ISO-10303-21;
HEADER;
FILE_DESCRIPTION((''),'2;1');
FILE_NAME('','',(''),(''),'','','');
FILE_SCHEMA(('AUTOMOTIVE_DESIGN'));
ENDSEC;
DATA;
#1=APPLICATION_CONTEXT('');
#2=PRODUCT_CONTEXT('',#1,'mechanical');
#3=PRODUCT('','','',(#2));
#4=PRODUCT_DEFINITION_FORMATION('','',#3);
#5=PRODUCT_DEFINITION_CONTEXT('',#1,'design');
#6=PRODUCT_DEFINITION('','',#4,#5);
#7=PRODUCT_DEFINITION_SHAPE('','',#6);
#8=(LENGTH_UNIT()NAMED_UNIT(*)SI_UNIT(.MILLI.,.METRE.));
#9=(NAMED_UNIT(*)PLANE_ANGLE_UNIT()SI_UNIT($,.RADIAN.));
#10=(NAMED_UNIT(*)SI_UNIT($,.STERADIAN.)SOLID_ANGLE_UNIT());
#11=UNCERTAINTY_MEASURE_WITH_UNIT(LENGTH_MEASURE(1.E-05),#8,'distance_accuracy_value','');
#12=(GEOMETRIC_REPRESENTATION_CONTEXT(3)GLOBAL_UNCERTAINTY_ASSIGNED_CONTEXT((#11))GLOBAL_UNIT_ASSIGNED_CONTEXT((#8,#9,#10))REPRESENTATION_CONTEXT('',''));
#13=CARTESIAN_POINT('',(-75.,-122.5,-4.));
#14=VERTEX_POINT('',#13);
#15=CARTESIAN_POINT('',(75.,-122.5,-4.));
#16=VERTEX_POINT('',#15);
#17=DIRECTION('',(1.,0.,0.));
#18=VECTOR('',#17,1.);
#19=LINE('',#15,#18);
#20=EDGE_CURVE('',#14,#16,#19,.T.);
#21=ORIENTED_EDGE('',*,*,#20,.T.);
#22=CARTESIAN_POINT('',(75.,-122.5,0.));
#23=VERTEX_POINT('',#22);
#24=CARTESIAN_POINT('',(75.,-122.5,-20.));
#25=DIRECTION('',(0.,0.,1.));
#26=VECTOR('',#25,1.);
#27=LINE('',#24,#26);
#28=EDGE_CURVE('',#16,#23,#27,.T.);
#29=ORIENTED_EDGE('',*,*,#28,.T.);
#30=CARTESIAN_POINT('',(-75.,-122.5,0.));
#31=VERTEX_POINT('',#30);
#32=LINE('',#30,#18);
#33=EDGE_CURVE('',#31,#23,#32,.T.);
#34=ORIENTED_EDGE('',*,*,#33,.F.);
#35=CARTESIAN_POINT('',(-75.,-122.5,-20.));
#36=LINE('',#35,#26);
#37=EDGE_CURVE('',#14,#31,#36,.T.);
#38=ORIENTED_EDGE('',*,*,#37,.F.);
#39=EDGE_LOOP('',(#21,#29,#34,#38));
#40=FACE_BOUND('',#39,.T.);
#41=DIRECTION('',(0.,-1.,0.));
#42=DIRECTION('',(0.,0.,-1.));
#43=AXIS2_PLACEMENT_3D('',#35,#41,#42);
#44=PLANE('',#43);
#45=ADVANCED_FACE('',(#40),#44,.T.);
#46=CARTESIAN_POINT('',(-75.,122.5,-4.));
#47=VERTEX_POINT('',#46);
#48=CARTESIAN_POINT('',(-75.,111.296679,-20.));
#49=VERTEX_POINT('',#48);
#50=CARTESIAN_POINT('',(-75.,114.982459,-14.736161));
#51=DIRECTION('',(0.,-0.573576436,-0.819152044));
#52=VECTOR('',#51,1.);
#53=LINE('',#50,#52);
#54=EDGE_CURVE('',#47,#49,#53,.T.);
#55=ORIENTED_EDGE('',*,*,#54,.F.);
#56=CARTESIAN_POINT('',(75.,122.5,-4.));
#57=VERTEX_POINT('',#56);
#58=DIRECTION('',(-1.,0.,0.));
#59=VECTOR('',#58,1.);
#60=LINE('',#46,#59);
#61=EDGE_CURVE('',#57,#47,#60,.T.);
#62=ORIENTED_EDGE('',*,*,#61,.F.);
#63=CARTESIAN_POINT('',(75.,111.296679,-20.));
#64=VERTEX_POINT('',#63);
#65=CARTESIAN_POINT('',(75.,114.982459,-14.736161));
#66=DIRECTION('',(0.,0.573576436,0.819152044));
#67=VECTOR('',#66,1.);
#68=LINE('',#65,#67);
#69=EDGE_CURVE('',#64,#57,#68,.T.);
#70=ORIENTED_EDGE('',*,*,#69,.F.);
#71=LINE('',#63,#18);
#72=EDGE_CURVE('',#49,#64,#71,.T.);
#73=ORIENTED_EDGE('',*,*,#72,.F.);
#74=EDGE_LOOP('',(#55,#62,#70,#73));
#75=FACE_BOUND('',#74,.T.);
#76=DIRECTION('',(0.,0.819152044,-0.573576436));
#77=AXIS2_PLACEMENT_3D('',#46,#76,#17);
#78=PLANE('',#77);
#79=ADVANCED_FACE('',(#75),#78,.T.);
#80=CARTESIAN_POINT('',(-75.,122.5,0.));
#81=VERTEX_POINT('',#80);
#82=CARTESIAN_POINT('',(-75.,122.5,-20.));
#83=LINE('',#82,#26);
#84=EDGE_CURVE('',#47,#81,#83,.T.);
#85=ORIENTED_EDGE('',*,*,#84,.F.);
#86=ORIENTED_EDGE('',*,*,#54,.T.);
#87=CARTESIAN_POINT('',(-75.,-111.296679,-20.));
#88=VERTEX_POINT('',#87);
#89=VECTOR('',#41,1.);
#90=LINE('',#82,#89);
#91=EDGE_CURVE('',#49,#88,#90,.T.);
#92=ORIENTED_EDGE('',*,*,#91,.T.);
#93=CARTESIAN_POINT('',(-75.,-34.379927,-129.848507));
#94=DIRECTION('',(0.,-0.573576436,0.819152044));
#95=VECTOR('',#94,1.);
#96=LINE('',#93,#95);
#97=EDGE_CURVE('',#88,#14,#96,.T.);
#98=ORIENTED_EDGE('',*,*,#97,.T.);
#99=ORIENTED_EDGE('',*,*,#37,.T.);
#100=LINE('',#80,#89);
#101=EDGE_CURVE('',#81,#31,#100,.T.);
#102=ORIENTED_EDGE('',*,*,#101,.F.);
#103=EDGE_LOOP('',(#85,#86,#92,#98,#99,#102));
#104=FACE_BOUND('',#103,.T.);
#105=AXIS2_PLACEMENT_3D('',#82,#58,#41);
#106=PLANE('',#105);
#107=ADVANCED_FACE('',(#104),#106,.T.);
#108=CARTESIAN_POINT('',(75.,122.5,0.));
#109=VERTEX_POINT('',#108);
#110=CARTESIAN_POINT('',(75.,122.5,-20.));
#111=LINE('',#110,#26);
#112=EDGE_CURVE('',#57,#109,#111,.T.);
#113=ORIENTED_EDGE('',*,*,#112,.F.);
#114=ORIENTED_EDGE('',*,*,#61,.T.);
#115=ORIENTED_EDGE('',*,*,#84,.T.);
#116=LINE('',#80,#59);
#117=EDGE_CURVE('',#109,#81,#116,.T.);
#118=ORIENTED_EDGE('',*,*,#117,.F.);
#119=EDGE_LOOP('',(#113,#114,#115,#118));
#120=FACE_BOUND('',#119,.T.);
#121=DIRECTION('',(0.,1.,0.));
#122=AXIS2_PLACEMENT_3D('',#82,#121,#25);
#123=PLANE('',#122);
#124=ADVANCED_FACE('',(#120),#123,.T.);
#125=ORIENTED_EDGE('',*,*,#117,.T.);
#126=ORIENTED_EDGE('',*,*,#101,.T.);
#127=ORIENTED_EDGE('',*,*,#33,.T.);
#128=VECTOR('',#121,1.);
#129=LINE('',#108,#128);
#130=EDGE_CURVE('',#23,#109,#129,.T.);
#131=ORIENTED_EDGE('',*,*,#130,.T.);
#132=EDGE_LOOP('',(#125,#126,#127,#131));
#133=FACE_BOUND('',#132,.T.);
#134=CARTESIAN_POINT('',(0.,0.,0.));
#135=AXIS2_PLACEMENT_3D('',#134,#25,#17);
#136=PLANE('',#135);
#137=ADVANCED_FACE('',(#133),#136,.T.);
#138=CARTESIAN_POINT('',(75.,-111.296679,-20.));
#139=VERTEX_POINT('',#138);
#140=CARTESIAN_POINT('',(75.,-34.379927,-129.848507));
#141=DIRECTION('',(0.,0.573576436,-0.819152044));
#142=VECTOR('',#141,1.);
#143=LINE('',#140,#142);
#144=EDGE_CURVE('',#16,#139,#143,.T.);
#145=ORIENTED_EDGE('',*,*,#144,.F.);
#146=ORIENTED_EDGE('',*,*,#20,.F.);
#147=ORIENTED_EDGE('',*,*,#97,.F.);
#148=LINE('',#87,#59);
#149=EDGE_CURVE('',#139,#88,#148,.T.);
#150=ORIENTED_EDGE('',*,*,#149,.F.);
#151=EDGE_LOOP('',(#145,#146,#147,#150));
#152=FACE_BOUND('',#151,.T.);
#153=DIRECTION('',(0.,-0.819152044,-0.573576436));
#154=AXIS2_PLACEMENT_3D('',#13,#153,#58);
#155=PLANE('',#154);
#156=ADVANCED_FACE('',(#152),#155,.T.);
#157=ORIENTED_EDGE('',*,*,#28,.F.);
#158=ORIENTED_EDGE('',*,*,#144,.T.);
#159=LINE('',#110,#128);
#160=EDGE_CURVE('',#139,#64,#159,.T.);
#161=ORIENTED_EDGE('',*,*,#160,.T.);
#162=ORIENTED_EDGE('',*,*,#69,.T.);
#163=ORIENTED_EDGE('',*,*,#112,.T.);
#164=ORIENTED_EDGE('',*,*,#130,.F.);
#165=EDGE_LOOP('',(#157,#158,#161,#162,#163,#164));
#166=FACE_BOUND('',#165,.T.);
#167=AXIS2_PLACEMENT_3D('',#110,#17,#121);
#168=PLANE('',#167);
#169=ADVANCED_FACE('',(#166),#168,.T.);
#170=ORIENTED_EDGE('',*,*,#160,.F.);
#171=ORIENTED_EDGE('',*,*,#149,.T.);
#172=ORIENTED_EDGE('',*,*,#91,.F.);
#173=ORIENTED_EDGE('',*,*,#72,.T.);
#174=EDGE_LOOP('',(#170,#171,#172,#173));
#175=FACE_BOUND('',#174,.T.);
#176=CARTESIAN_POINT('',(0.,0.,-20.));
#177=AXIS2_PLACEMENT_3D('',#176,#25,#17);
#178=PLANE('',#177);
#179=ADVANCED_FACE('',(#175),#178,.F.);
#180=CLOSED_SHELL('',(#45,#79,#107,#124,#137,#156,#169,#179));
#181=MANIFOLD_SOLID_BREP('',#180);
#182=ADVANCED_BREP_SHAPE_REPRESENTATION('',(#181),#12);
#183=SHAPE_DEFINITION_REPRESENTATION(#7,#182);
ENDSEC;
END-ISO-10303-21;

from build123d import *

# Parameters (mm, degrees)
SKETCH_1_W             = 150
SKETCH_1_H             = 245
SM_BASE_FLANGE_1_DEPTH = 20
CHAMFER_1_SIZE         = 16
CHAMFER_1_SIZE2        = 11.203320611
CHAMFER_2_SIZE         = 16
CHAMFER_2_SIZE2        = 11.203320611


# Sheet-metal steps are written as plain solids
with BuildPart() as part:
    # Sketch 1 → 基体-法兰1 (new body)
    with BuildSketch(Plane.XY):
        Rectangle(SKETCH_1_W, SKETCH_1_H)
    extrude(amount=-SM_BASE_FLANGE_1_DEPTH)

    # 倒角1
    chamfer_1_edges = [part.edges().sort_by_distance(p)[0] for p in [
        (0, 122.5, -20),
    ]]
    chamfer_1_side = [part.faces().sort_by_distance(p)[0] for p in [
        (0, 122.5, -10),
    ]]
    chamfer(chamfer_1_edges, length=CHAMFER_1_SIZE, length2=CHAMFER_1_SIZE2, reference=chamfer_1_side[0])

    # 倒角2
    chamfer_2_edges = [part.edges().sort_by_distance(p)[0] for p in [
        (0, -122.5, -20),
    ]]
    chamfer_2_side = [part.faces().sort_by_distance(p)[0] for p in [
        (0, -122.5, -10),
    ]]
    chamfer(chamfer_2_edges, length=CHAMFER_2_SIZE, length2=CHAMFER_2_SIZE2, reference=chamfer_2_side[0])


solid = part.part
